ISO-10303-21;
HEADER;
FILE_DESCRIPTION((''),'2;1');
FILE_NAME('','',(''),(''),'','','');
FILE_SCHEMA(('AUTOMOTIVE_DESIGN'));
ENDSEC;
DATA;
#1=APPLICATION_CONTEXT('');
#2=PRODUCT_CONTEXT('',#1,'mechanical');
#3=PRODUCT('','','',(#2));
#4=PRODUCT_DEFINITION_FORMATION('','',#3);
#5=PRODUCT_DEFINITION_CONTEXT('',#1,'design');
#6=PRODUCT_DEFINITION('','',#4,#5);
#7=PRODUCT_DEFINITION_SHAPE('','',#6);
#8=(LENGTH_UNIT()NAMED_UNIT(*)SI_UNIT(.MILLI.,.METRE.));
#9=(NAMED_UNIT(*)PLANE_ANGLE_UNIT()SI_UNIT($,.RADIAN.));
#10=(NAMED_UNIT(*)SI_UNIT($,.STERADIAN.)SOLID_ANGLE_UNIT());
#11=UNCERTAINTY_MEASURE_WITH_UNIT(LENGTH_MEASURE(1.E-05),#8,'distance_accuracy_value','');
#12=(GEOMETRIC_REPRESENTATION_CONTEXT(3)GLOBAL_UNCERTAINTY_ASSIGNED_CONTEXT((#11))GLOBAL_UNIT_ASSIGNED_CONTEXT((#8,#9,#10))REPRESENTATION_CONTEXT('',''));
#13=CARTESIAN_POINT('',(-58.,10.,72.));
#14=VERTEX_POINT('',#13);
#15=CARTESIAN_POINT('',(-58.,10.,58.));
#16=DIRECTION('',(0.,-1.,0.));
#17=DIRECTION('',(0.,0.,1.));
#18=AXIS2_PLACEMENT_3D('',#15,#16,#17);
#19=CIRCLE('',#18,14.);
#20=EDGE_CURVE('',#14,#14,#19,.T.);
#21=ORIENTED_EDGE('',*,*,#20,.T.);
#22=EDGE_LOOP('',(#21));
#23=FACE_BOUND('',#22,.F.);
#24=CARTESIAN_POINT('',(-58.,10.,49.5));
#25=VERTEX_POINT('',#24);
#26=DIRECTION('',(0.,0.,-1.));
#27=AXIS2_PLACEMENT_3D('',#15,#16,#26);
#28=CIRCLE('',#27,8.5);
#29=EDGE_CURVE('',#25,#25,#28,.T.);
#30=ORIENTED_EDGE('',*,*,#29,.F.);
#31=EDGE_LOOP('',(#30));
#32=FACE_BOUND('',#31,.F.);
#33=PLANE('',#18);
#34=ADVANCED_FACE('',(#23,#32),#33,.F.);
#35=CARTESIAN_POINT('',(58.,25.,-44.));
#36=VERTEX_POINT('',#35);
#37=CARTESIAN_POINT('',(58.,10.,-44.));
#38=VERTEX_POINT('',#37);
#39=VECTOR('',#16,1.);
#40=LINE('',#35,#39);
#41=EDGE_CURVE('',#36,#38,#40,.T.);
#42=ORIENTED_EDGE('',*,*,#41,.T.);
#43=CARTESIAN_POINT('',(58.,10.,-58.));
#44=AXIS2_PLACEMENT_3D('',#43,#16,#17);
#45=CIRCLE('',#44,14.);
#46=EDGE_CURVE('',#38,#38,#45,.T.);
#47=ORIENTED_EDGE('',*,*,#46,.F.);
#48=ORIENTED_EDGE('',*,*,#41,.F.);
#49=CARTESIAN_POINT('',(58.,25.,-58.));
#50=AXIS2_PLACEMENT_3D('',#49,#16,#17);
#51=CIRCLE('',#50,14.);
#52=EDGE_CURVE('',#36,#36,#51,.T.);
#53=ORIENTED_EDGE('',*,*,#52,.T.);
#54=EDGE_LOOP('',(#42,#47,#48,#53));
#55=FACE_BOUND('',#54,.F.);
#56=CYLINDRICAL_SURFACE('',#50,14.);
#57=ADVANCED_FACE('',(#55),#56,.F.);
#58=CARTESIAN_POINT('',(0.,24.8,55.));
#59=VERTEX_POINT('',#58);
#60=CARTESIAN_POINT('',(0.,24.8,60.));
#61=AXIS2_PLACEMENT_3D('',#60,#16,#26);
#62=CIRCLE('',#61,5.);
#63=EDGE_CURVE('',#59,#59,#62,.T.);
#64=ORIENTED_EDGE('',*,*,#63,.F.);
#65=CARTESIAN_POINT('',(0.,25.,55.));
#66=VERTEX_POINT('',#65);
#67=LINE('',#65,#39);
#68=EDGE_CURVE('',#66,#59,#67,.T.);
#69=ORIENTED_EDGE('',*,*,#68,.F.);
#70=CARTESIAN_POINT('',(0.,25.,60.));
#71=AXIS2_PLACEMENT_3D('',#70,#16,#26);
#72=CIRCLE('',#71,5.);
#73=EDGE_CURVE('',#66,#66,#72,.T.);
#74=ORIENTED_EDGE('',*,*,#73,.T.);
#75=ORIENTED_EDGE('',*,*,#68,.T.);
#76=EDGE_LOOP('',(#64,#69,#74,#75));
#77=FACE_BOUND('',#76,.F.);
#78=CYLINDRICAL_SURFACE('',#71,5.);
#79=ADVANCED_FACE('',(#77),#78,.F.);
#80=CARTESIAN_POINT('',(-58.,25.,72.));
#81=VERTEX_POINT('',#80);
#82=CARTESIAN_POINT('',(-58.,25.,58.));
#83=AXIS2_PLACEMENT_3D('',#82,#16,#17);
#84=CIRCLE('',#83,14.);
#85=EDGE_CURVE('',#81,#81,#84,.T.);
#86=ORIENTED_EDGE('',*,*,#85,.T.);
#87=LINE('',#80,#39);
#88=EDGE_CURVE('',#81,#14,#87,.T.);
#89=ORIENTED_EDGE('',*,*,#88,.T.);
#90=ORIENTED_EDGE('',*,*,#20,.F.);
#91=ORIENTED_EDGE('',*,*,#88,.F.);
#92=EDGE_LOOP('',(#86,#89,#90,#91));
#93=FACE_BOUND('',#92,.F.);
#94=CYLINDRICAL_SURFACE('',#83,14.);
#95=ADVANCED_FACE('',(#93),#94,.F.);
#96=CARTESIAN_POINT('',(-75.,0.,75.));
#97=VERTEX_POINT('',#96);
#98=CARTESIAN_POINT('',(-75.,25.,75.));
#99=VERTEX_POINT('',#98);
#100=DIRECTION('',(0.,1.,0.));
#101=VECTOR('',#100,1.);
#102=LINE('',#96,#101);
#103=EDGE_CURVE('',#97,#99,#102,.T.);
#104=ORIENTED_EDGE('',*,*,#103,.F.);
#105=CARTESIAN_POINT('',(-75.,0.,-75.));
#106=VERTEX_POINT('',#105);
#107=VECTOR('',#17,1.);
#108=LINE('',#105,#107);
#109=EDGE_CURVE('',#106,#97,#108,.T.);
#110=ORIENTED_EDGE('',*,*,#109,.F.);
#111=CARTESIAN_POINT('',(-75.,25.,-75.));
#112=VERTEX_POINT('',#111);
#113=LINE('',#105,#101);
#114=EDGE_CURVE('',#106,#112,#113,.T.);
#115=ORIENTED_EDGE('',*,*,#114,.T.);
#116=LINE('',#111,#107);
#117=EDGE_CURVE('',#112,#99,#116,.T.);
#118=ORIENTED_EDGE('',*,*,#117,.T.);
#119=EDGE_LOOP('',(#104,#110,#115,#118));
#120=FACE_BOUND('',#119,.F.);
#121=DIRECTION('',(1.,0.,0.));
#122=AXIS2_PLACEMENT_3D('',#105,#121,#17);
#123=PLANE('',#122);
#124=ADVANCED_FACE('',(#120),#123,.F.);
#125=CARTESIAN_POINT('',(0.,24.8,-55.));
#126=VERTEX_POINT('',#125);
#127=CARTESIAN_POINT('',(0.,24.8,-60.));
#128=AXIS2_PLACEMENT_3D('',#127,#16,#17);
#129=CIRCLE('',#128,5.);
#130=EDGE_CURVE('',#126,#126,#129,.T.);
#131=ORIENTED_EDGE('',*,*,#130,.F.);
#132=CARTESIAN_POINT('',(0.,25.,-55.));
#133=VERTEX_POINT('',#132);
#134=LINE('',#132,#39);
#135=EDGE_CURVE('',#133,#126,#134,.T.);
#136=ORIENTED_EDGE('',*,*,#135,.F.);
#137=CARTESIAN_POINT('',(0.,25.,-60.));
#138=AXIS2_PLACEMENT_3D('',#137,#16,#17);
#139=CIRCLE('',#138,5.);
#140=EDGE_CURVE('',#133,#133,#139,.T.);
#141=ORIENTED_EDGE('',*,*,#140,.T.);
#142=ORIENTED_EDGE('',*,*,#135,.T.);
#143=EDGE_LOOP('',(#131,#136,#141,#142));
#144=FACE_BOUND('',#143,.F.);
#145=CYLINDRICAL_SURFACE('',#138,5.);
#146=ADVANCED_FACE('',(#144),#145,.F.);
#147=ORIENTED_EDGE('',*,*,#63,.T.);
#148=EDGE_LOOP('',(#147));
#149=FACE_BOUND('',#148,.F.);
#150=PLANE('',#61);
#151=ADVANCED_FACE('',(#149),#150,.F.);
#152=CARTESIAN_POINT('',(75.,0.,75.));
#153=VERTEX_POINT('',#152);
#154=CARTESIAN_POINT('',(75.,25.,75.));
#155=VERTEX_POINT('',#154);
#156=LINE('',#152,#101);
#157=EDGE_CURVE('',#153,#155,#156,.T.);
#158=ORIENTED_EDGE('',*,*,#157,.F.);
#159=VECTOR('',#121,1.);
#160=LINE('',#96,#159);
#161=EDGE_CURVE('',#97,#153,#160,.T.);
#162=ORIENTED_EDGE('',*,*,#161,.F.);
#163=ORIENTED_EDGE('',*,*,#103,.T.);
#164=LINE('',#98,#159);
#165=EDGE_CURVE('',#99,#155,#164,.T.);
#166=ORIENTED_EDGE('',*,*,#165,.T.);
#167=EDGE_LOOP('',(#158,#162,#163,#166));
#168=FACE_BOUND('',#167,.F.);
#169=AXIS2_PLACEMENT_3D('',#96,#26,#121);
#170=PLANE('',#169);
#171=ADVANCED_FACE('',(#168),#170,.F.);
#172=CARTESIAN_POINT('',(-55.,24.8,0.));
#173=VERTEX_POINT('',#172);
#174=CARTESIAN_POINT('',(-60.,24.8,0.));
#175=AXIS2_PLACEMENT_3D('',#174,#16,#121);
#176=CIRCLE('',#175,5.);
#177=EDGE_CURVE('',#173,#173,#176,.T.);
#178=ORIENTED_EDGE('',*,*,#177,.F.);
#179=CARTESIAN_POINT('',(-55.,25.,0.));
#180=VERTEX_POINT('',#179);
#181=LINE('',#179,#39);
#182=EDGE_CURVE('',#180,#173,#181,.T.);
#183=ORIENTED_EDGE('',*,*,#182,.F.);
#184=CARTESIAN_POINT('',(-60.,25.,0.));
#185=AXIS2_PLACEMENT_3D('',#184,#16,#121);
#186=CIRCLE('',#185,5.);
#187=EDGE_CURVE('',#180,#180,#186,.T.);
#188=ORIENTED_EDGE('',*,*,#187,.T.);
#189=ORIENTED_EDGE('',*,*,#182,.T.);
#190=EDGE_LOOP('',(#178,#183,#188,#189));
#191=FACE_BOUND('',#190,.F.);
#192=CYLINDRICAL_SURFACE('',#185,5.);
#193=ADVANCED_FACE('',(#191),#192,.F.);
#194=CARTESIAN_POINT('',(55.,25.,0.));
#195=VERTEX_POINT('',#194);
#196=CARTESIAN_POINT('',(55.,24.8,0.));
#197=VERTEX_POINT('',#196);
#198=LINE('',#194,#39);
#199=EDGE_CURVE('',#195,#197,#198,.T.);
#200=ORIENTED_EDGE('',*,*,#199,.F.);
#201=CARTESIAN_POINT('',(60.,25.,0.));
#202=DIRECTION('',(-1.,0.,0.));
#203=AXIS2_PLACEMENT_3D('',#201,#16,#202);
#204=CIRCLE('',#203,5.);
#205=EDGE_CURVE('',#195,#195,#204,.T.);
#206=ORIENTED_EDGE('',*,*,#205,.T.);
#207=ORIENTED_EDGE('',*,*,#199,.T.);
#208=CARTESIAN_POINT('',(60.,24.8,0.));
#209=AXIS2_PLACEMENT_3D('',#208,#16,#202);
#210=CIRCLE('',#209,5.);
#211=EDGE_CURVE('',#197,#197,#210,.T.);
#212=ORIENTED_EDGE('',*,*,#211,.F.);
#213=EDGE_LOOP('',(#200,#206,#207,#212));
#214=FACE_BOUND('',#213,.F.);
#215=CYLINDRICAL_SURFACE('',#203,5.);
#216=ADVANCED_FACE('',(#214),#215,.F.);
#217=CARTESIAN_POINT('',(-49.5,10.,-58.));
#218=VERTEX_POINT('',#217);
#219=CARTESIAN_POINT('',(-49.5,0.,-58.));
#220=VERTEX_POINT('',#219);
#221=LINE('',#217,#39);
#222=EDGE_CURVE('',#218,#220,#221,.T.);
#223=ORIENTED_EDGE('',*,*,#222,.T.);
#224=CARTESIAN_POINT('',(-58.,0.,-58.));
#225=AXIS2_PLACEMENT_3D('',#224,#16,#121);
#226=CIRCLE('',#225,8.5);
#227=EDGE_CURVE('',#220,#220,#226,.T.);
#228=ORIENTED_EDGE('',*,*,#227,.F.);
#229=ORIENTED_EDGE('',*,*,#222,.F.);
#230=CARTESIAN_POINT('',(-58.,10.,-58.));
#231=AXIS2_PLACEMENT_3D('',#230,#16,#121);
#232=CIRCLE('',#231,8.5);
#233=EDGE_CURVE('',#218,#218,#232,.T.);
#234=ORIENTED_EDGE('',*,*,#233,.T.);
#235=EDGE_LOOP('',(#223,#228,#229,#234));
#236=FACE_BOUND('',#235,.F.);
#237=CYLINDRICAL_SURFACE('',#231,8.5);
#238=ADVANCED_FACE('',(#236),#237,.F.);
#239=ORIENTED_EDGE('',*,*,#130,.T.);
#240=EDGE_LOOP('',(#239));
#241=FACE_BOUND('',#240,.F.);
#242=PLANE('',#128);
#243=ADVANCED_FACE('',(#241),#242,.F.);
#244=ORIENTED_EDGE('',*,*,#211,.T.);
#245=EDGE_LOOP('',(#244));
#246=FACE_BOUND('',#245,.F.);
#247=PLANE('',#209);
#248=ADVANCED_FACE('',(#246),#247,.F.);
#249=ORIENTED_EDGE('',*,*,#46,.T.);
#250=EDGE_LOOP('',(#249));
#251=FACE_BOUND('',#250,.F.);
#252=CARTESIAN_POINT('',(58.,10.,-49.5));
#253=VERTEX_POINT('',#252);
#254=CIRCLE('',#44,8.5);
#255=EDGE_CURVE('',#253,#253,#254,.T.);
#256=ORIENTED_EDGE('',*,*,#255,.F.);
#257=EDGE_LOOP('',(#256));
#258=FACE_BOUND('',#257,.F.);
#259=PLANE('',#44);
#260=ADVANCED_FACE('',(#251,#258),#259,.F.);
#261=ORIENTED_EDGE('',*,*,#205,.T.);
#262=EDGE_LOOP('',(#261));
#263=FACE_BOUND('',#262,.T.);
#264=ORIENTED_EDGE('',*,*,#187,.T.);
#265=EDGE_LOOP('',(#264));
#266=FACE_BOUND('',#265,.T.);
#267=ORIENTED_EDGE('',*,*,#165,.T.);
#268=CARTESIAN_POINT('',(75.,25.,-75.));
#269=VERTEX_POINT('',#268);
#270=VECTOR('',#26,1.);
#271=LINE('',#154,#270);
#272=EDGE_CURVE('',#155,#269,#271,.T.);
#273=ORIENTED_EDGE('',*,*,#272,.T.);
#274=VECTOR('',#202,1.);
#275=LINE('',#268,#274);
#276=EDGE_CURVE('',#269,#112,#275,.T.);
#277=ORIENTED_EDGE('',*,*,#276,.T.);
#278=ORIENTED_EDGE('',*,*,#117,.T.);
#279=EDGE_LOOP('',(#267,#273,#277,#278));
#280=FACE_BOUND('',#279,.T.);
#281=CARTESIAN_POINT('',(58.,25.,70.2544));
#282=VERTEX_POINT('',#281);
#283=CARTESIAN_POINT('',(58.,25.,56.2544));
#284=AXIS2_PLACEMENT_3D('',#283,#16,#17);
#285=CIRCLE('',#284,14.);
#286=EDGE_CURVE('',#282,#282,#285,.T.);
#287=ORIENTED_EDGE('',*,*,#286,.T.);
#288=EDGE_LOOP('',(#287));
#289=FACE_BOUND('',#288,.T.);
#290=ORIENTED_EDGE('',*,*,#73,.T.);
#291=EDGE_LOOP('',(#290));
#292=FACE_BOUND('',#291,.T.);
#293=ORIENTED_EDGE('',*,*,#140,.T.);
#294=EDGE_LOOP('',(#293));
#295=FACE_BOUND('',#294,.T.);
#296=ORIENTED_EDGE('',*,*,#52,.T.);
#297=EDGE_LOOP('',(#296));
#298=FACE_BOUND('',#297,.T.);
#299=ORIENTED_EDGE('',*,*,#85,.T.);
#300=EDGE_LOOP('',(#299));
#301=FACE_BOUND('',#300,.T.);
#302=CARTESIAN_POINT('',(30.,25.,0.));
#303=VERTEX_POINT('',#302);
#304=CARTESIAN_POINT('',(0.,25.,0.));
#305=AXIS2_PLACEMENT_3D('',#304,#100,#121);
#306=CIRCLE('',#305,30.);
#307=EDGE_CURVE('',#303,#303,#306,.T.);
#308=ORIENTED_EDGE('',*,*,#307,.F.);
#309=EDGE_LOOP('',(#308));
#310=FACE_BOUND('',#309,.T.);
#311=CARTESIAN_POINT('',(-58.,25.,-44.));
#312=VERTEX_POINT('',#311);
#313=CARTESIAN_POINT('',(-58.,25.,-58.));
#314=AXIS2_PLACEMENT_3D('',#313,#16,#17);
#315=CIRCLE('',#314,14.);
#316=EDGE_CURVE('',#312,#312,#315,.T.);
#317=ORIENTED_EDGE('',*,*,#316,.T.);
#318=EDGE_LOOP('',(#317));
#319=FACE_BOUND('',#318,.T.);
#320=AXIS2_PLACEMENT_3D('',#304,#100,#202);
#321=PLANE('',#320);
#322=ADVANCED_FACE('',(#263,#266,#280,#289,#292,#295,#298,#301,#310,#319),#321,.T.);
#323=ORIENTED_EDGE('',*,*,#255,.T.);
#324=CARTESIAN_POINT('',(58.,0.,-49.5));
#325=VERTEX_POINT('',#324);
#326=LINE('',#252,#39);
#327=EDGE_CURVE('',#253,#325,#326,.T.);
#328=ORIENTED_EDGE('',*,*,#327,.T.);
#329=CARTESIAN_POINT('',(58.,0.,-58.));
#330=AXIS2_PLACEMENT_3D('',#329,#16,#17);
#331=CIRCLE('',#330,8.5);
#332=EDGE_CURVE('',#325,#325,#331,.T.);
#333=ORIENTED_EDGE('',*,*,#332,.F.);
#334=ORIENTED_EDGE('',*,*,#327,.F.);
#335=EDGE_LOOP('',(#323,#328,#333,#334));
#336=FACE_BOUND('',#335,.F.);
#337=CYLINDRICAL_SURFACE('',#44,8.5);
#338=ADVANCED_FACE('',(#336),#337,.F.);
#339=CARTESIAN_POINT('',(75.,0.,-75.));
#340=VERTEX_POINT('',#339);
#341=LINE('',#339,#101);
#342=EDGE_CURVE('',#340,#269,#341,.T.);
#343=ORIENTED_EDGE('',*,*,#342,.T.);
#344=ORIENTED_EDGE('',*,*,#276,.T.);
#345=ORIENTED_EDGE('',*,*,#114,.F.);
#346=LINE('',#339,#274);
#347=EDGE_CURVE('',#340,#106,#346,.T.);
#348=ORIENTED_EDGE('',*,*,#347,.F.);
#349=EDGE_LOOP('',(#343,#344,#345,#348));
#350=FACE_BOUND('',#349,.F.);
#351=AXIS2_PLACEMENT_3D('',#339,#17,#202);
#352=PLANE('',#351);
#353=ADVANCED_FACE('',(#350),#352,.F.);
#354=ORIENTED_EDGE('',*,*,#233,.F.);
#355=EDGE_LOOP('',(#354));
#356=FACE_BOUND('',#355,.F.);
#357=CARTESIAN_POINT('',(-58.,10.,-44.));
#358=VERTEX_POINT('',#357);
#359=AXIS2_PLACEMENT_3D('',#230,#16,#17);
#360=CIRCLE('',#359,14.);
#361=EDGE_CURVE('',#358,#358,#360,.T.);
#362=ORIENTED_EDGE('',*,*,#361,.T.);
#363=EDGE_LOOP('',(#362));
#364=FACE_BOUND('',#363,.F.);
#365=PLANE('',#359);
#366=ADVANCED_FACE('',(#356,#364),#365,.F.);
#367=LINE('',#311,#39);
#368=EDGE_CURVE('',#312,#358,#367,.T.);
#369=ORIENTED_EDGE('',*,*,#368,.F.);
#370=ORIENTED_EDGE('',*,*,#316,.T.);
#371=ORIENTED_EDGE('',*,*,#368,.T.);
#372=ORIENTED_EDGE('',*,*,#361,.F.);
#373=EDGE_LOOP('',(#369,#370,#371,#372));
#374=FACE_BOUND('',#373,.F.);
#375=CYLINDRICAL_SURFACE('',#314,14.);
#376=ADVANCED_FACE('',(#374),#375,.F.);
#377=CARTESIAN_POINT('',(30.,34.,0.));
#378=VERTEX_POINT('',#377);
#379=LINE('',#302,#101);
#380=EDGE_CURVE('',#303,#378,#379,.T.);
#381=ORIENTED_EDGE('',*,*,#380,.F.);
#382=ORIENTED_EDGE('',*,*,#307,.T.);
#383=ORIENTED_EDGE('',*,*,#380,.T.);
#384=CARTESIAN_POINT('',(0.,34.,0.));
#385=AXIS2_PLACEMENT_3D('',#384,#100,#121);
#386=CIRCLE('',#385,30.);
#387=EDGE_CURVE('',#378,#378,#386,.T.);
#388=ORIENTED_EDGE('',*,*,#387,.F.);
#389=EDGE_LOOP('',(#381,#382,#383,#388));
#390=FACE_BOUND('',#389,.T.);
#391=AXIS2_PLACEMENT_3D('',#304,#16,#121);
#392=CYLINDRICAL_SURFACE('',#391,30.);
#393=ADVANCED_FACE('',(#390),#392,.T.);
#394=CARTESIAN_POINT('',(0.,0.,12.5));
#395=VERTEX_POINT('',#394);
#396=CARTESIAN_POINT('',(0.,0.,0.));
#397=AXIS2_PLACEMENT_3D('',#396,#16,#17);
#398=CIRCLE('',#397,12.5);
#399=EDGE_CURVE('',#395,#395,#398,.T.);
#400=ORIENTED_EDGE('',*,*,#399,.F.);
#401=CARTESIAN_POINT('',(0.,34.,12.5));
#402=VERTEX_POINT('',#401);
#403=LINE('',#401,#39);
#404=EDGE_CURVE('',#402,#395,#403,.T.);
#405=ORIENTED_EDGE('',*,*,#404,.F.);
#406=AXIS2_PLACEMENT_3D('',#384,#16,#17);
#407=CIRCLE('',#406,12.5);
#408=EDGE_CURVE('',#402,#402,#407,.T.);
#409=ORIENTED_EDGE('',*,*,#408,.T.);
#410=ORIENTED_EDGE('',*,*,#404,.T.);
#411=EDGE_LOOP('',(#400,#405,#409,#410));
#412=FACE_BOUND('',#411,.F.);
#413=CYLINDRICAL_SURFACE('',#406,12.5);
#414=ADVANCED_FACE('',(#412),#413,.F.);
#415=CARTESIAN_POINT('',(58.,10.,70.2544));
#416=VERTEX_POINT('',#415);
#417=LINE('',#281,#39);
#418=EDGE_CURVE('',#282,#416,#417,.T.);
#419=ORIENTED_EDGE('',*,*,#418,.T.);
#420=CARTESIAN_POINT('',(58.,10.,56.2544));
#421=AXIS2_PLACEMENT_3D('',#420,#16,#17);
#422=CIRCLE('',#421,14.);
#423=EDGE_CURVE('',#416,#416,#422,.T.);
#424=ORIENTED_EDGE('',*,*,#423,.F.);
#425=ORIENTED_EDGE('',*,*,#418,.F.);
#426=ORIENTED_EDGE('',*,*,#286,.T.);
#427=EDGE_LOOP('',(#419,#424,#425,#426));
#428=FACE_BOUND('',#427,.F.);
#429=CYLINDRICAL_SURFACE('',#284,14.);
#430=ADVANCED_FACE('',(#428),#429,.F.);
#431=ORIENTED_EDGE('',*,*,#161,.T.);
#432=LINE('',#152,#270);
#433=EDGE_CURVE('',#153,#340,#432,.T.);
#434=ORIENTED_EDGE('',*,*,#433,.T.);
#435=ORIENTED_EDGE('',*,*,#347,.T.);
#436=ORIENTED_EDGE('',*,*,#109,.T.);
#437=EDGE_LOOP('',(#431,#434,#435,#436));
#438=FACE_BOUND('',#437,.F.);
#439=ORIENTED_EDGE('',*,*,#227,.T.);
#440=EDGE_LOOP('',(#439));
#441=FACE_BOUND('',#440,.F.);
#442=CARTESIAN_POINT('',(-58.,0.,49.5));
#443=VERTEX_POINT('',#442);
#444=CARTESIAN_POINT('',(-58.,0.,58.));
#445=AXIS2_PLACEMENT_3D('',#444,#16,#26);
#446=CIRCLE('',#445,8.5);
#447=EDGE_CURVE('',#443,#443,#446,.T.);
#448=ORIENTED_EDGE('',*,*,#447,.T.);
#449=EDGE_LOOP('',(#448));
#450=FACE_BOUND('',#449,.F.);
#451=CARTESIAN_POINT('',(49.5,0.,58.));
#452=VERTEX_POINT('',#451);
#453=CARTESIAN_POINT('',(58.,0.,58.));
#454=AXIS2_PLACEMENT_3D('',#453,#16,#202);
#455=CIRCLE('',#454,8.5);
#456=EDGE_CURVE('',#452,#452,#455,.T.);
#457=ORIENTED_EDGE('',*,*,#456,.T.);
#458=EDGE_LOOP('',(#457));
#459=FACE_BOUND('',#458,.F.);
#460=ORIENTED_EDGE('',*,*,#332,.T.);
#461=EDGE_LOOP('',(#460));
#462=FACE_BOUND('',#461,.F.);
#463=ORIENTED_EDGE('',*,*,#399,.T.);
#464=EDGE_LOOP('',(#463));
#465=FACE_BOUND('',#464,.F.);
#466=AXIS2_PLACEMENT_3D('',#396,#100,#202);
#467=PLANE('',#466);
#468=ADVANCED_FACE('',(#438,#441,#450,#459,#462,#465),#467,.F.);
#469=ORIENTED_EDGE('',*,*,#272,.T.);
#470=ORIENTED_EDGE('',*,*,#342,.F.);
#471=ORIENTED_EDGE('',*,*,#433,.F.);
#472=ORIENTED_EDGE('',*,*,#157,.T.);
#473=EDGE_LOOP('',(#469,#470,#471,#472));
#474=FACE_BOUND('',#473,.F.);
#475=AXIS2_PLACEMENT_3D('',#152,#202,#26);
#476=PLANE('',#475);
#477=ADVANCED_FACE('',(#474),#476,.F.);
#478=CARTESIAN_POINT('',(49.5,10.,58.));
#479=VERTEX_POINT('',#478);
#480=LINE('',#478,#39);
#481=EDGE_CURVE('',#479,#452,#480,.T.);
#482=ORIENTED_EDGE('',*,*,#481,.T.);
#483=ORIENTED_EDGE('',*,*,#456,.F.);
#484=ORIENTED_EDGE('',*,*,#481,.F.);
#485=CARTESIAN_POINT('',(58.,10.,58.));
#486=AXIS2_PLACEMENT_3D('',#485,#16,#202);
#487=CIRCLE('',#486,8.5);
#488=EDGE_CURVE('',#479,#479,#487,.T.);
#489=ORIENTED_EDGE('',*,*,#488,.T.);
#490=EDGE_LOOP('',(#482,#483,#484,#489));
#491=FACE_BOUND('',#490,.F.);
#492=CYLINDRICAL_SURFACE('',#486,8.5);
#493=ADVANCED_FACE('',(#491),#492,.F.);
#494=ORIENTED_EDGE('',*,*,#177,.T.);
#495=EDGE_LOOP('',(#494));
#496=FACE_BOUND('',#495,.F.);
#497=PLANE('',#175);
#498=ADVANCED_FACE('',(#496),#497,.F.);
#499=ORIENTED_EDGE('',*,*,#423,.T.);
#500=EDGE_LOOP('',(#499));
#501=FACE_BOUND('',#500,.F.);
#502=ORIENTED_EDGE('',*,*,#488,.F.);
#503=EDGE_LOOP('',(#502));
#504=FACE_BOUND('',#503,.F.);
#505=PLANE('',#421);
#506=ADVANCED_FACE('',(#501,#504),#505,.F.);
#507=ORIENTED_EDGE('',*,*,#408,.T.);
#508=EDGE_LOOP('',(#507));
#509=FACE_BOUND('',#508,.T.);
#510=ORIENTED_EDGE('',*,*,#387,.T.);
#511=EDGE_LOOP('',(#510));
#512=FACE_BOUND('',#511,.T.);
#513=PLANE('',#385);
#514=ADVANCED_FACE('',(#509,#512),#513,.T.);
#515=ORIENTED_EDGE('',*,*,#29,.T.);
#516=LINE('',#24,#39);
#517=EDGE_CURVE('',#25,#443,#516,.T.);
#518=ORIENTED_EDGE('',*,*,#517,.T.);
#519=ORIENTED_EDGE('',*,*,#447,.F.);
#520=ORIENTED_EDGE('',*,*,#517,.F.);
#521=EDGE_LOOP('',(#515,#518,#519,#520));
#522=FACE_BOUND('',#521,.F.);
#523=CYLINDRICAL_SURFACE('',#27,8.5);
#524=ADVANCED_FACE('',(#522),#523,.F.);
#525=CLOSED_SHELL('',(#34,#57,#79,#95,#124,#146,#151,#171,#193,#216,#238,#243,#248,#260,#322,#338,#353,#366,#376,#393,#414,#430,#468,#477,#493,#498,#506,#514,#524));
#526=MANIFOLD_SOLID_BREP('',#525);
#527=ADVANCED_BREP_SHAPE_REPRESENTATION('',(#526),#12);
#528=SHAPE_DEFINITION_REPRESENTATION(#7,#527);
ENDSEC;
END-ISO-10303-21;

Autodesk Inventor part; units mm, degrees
ref_plane "YZ Plane" through (0, 0, 0) normal (1, 0, 0) x (0, 1, 0)
ref_plane "XZ Plane" through (0, 0, 0) normal (0, 1, 0) x (-1, 0, 0)
ref_plane "XY Plane" through (0, 0, 0) normal (0, 0, 1) x (1, 0, 0)
sketch "Sketch1" plane through (0, 0, 0) normal (0, 1, 0) x (-1, 0, 0)
  line L0 (-75, -75) -> (75, -75)
  line L1 (75, -75) -> (75, 75)
  line L2 (75, 75) -> (-75, 75)
  line L3 (-75, 75) -> (-75, -75)
  line L4 (-75, -75) -> (75, 75) construction
  line L5 (75, -75) -> (-75, 75) construction
  point P0 (0, 0)
  dimension "d0" = 150
  dimension "d1" = 150
extrude "Extrusion1" add sketch "Sketch1" along normal blind 25
sketch "Sketch2" plane through (0, 25, 0) normal (0, 1, 0) x (1, 0, 0)
  circle A0 centre (0, 0) radius 30
  dimension "d4" = 60
sketch "Sketch3" plane through (0, 25, 0) normal (0, 1, 0) x (1, 0, 0)
  line L0 (58, 58) -> (-58, 58) construction
  line L1 (-58, 58) -> (-58, -58) construction
  line L2 (-58, -58) -> (58, -58) construction
  line L3 (58, -58) -> (58, 58) construction
  line L4 (58, 58) -> (-58, -58) construction
  line L5 (-58, 58) -> (58, -58) construction
  circle A0 centre (0, 0) radius 60 construction
  point P0 (58, -56.2544)
  point P1 (0, 60)
  dimension "d7" = 120
  dimension "d5" = 116
  dimension "d6" = 116
extrude "Extrusion2" add sketch "Sketch2" along normal blind 9
hole "Hole1" at (-58, 25, -58) at (58, 25, -58) at (58, 25, 56.2544) at (-58, 25, 58) direction (0, -1, 0) diameter 28 depth 15
hole "Hole2" at (0, 25, -60) direction (0, -1, 0) diameter 10 depth 0.2
pattern_circular "Circular Pattern1" count 4 over 360 about axis through (0, 25, 0) along (0, 1, 0) of "Hole2"
sketch "Sketch5" plane through (0, 34, 0) normal (0, 1, 0) x (1, 0, 0)
  circle A0 centre (0, 0) radius 30 construction
hole "Hole5" at (0, 34, 0) direction (0, -1, 0) diameter 25 end through all
thread "Thread1" size "M25x1.5" class "6H" standard "ANSI Metric M Profile" length 30
sketch "Sketch6" plane through (58, 10, -58) normal (0, 1, 0) x (1, 0, 0)
  circle A0 centre (0, 0) radius 14 construction
  circle A1 centre (0, 0) radius 8.5
  point P0 (-58, -58)
  dimension "d50" = 17
hole "Hole6" at (58, 10, -58) direction (0, -1, 0) diameter 17 end through all
pattern_circular "Circular Pattern2" count 4 over 360 about axis through (0, 25, 0) along (0, 1, 0) of "Hole6"
properties part number "BasePlate" material "Iron, Cast"
